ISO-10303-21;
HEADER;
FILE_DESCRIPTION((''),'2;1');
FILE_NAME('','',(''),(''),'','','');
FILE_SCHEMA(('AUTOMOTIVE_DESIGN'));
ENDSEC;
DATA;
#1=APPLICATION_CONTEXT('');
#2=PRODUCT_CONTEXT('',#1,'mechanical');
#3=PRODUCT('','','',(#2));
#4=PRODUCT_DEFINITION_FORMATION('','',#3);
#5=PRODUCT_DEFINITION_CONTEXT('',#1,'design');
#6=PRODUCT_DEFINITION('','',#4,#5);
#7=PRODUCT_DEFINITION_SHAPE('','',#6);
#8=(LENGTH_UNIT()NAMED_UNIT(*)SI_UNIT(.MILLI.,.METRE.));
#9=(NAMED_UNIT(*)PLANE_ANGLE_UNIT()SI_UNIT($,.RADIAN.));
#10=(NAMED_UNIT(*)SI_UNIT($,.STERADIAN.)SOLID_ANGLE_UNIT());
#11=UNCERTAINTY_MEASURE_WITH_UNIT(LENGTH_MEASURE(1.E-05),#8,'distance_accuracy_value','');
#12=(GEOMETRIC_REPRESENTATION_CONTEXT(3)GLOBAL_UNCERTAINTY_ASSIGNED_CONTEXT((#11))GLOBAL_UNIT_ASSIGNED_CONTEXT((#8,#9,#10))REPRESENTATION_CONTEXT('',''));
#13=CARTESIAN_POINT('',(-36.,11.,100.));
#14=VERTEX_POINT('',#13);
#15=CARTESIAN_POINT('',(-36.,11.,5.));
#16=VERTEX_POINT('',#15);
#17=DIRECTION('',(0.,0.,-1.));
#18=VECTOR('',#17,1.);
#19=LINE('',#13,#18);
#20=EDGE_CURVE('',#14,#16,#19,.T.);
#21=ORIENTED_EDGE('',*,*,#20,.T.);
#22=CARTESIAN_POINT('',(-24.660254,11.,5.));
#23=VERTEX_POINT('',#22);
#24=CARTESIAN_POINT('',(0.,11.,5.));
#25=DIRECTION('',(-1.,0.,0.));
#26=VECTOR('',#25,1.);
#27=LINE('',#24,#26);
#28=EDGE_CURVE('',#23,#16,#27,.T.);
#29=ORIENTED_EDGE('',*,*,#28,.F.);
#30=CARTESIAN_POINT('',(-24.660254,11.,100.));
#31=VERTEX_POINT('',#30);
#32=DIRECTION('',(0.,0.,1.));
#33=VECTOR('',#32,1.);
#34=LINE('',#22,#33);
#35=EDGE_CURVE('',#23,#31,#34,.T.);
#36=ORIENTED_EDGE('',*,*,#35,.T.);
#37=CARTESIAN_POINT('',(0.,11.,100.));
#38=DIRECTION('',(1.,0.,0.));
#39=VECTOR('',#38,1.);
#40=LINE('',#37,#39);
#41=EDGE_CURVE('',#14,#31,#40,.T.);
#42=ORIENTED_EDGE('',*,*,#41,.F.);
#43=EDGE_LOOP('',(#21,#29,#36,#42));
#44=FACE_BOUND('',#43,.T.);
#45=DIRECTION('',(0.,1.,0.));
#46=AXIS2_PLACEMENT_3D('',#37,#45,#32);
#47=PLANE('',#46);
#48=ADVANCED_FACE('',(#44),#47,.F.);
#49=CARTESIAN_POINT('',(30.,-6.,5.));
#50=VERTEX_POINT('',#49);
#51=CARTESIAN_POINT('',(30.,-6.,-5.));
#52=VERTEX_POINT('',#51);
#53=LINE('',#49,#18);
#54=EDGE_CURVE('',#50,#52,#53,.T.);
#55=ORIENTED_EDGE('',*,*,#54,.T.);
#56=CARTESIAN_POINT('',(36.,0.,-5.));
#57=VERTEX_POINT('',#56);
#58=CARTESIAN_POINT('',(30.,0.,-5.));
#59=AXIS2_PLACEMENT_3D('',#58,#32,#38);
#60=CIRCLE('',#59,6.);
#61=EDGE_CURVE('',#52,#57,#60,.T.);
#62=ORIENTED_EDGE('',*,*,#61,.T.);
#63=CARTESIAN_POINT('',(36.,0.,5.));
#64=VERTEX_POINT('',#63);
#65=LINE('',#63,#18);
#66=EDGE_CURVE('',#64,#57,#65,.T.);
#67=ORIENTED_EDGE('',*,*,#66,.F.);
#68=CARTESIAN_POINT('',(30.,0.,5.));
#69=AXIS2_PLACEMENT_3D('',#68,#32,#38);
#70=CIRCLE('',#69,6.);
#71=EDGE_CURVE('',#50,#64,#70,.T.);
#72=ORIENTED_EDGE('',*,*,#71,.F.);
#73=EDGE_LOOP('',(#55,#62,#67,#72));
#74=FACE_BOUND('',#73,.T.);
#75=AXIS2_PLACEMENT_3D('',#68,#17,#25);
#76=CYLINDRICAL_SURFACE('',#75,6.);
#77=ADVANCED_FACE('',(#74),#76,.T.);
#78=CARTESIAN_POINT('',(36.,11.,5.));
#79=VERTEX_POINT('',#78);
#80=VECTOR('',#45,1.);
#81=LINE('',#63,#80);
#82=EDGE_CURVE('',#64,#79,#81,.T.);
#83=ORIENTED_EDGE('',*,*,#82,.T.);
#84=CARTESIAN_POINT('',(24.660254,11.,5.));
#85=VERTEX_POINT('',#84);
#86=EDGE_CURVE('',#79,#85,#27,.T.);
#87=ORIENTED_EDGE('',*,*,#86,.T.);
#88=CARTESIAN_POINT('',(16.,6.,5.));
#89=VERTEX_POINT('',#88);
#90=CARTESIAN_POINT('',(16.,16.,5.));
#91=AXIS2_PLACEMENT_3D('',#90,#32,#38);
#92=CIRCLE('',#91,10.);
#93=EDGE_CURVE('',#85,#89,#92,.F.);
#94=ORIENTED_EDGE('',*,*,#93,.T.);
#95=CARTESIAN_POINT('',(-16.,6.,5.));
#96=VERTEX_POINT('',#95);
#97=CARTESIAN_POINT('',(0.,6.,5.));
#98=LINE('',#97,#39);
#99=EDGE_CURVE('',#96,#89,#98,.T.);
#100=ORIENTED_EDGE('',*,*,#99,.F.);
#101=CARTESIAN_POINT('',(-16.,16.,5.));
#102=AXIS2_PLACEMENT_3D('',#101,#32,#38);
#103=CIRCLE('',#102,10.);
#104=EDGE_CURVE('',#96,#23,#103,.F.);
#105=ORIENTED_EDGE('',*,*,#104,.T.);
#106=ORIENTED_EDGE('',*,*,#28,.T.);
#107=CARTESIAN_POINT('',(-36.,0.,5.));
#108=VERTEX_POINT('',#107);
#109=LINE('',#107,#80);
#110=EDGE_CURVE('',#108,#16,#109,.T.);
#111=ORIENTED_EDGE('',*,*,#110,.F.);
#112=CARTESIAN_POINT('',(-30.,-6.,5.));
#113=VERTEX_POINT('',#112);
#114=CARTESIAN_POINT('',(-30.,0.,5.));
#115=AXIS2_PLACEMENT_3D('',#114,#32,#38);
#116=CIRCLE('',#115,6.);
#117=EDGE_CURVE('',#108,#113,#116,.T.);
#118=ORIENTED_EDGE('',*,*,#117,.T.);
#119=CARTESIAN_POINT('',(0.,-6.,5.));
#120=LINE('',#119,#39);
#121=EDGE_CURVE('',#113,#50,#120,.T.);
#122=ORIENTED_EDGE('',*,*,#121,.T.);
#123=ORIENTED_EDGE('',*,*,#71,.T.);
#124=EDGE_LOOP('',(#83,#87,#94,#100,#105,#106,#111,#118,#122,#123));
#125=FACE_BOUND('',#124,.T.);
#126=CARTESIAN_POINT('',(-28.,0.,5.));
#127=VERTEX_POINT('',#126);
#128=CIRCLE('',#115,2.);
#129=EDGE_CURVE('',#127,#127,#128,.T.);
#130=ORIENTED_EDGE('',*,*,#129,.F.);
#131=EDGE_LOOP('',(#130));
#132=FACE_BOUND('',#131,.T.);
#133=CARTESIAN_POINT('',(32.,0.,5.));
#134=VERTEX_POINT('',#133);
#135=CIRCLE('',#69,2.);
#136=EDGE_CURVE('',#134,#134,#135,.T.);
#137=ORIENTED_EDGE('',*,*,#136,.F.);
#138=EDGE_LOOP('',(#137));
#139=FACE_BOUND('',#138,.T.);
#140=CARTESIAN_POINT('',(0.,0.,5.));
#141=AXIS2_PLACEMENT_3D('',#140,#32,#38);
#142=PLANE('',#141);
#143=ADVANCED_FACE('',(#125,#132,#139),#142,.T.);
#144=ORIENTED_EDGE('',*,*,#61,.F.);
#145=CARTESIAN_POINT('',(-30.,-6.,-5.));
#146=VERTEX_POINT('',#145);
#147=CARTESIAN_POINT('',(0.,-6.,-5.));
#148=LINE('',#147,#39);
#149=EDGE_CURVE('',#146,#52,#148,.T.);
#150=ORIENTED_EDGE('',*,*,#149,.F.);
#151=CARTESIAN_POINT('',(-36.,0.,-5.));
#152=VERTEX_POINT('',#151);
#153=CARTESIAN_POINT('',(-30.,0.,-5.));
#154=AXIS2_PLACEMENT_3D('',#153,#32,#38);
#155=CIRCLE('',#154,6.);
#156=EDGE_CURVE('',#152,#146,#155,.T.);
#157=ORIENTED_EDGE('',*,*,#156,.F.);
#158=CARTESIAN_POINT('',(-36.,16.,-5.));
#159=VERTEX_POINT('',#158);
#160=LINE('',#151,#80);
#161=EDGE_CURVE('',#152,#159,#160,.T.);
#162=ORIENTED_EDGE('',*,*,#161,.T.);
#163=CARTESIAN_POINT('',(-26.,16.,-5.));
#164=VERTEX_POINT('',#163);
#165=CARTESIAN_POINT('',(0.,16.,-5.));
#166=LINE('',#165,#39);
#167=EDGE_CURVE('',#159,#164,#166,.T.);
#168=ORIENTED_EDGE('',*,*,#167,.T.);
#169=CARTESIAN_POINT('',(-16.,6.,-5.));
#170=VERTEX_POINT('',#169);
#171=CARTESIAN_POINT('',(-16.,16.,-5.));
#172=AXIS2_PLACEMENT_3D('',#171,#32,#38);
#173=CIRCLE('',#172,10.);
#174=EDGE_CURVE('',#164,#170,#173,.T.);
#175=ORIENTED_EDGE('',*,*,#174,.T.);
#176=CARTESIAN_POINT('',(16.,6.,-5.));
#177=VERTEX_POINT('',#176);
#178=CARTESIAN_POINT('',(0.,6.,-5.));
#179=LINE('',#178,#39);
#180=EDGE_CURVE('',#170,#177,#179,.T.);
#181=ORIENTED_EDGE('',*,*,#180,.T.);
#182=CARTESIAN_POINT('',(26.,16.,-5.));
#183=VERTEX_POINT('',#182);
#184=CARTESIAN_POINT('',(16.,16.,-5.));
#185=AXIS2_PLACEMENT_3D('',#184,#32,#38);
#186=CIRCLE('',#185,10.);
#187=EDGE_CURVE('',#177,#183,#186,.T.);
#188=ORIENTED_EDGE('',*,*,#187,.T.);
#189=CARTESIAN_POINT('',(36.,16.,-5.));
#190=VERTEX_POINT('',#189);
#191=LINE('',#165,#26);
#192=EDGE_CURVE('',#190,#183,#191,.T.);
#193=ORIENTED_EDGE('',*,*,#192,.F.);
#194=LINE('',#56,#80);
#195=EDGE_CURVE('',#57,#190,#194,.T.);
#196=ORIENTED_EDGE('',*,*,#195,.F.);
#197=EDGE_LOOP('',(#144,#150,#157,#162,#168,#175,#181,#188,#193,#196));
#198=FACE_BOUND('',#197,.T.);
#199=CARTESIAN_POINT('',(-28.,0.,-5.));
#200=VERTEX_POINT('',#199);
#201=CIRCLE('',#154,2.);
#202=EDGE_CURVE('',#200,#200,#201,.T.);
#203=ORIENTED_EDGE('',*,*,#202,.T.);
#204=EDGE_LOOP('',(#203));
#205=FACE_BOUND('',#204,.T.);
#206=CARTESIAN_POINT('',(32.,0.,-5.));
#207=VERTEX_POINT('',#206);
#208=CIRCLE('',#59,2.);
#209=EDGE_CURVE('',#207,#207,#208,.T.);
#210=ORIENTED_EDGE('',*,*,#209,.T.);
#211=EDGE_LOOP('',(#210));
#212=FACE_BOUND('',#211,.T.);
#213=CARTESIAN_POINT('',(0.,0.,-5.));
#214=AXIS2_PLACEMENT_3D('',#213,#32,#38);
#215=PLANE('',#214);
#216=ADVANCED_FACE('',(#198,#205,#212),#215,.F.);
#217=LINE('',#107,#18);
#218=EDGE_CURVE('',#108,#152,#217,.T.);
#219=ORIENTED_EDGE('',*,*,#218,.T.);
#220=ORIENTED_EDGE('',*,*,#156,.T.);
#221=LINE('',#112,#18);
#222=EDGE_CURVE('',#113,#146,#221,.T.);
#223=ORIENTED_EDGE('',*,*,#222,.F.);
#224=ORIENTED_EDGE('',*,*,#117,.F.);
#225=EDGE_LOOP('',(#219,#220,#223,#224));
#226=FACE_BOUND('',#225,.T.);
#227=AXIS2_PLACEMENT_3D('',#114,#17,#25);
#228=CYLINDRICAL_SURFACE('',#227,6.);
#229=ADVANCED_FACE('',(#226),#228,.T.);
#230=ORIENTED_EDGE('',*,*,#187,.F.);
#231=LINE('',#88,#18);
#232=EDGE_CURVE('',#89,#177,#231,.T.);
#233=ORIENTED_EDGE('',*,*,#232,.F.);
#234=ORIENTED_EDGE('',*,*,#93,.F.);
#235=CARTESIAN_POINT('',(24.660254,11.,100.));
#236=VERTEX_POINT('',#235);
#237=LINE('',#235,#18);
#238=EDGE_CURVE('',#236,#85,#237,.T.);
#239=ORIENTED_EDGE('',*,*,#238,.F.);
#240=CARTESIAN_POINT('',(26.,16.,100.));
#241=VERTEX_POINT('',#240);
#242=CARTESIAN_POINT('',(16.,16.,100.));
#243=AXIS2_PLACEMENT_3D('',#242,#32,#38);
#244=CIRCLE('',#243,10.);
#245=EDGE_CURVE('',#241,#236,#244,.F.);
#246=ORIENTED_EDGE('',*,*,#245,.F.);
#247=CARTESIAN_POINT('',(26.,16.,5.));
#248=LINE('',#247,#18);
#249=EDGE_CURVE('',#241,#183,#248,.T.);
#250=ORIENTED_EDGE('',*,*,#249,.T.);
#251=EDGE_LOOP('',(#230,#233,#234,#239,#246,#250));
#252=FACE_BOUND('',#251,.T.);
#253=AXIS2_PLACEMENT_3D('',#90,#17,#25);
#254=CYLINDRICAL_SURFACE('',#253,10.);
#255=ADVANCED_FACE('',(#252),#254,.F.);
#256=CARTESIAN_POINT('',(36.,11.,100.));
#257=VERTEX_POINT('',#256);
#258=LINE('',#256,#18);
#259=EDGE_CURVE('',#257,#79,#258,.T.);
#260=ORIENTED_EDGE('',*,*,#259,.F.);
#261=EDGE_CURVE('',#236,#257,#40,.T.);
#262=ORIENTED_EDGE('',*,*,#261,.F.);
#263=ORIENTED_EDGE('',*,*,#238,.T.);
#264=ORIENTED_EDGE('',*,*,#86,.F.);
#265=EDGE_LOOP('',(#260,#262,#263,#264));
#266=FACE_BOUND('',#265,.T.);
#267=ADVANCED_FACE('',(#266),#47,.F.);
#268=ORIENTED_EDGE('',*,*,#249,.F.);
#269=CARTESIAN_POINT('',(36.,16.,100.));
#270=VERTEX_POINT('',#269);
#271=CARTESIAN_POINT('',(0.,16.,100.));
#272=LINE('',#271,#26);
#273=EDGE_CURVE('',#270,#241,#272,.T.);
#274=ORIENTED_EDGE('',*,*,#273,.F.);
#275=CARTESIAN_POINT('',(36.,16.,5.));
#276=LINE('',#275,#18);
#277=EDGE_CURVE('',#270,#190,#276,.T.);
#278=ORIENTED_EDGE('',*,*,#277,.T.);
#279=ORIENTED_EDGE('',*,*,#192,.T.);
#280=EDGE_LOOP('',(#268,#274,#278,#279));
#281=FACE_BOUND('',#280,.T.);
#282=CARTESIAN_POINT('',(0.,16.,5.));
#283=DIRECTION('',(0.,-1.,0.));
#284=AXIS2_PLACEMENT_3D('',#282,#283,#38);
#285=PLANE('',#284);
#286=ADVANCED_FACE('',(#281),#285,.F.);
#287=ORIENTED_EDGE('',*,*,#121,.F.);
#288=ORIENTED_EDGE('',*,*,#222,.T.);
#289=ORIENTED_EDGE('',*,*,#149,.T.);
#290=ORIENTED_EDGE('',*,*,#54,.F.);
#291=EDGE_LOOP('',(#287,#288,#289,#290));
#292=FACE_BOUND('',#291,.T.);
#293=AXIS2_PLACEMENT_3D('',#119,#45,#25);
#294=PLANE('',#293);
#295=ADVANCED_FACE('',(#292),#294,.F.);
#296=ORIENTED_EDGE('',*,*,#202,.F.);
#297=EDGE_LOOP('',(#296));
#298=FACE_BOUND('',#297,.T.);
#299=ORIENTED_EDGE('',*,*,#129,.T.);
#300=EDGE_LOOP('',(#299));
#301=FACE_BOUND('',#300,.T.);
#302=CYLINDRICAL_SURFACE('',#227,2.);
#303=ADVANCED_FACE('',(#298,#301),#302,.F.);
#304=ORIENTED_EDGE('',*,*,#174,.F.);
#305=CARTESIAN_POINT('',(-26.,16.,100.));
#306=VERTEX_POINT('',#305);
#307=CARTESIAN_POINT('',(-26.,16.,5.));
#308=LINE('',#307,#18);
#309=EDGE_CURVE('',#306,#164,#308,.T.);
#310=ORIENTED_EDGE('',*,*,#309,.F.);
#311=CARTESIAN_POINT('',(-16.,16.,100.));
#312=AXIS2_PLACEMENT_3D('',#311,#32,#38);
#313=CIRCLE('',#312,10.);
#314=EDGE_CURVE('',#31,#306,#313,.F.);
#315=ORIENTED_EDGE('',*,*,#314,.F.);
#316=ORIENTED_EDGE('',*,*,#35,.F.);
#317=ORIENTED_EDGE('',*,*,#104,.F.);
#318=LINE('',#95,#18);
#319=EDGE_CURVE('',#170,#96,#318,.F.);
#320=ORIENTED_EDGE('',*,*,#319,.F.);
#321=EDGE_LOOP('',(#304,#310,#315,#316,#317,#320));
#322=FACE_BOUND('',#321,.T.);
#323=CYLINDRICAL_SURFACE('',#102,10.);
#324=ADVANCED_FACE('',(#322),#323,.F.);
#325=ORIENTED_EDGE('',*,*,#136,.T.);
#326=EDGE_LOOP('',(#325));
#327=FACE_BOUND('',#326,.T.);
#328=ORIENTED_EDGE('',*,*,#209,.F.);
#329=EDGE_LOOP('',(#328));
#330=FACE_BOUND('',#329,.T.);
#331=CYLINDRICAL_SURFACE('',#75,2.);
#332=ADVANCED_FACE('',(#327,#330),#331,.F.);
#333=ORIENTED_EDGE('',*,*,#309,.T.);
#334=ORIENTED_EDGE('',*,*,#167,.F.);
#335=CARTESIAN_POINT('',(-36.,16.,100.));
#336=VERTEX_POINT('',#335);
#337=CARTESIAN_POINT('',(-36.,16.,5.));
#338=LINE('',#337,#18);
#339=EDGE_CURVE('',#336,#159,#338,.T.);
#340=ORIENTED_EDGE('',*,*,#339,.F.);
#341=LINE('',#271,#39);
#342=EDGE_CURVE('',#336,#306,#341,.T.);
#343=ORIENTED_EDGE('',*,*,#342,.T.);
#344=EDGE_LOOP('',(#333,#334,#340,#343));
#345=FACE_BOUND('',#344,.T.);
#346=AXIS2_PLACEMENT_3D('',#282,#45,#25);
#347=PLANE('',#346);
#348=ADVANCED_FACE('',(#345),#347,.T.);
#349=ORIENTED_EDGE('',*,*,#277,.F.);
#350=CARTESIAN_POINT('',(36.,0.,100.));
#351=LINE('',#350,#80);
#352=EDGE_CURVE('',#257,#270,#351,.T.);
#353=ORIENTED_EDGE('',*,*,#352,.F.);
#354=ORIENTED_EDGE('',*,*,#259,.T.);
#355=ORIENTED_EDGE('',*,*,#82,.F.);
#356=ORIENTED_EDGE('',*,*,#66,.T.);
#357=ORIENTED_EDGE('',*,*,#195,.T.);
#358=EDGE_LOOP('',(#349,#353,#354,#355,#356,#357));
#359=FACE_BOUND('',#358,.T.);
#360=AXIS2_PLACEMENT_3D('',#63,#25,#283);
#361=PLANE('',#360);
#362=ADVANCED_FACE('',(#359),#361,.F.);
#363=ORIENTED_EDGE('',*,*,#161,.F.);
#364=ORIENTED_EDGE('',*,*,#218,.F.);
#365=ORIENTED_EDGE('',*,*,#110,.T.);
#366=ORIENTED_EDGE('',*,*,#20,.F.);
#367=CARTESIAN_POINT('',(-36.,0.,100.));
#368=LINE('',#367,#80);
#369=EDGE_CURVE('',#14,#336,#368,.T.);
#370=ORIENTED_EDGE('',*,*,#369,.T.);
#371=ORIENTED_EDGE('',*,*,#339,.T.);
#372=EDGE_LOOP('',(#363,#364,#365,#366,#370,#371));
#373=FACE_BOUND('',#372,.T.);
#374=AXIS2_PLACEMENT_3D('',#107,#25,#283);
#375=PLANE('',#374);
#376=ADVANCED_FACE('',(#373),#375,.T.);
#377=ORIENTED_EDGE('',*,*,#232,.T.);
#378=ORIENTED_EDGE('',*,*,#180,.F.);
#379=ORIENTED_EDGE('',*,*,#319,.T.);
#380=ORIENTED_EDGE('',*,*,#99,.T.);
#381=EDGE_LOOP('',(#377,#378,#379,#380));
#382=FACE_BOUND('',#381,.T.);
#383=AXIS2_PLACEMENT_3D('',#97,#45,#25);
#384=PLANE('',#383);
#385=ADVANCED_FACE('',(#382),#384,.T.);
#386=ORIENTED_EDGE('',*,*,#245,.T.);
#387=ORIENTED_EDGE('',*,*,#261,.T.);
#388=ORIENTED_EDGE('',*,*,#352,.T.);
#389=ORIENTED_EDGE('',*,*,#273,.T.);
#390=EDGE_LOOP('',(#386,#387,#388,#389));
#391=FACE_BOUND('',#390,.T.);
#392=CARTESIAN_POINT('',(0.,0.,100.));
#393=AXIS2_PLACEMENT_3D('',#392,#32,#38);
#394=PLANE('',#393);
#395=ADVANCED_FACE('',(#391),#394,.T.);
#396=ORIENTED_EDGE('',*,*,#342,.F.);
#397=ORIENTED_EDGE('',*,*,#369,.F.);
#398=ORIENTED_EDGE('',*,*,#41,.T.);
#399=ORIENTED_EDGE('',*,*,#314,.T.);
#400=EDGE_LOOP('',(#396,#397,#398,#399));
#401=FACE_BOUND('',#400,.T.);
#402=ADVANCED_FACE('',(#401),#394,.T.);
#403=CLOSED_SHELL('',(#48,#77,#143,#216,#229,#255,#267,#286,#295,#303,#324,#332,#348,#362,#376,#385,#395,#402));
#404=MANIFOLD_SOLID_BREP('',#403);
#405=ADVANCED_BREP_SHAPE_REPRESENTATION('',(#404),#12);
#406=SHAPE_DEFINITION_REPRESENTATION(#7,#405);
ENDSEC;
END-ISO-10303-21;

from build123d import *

# Parameters (mm, degrees)
SKETCH1_R           = 2
BOSS_EXTRUDE1_DEPTH = 5
SKETCH1_3_W         = 10
SKETCH1_3_H         = 5
BOSS_EXTRUDE2_DEPTH = 100
FILLET1_R           = 10


with BuildPart() as part:
    # Sketch1 → Boss-Extrude1 (new, symmetric)
    with BuildSketch(Plane.XY):
        with BuildLine():
            ThreePointArc((-36, 0), (-34.242640687, -4.242640687), (-30, -6))
            Line((-30, -6), (30, -6))
            ThreePointArc((30, -6), (34.242640687, -4.242640687), (36, 0))
            Line((36, 0), (36, 16))
            Line((36, 16), (26, 16))
            Line((26, 16), (26, 6))
            Line((26, 6), (-26, 6))
            Line((-26, 6), (-26, 16))
            Line((-26, 16), (-36, 16))
            Line((-36, 16), (-36, 0))
        make_face()
        with Locations((-30, 0)):
            Circle(SKETCH1_R, mode=Mode.SUBTRACT)
        with Locations((30, 0)):
            Circle(SKETCH1_R, mode=Mode.SUBTRACT)
    extrude(amount=BOSS_EXTRUDE1_DEPTH, both=True)

    # Sketch1<3> → Boss-Extrude2 (add)
    with BuildSketch(Plane.XY):
        with Locations((-31, 13.5)):
            Rectangle(SKETCH1_3_W, SKETCH1_3_H)
        with Locations((31, 13.5)):
            Rectangle(SKETCH1_3_W, SKETCH1_3_H)
    extrude(amount=BOSS_EXTRUDE2_DEPTH)

    # Fillet1
    fillet1_edges = [part.edges().sort_by_distance(p)[0] for p in [
        (26, 6, 0),
        (-26, 6, 0),
    ]]
    fillet(fillet1_edges, radius=FILLET1_R - 0.0001)  # a hair under: the kernel refuses the full size


solid = part.part
